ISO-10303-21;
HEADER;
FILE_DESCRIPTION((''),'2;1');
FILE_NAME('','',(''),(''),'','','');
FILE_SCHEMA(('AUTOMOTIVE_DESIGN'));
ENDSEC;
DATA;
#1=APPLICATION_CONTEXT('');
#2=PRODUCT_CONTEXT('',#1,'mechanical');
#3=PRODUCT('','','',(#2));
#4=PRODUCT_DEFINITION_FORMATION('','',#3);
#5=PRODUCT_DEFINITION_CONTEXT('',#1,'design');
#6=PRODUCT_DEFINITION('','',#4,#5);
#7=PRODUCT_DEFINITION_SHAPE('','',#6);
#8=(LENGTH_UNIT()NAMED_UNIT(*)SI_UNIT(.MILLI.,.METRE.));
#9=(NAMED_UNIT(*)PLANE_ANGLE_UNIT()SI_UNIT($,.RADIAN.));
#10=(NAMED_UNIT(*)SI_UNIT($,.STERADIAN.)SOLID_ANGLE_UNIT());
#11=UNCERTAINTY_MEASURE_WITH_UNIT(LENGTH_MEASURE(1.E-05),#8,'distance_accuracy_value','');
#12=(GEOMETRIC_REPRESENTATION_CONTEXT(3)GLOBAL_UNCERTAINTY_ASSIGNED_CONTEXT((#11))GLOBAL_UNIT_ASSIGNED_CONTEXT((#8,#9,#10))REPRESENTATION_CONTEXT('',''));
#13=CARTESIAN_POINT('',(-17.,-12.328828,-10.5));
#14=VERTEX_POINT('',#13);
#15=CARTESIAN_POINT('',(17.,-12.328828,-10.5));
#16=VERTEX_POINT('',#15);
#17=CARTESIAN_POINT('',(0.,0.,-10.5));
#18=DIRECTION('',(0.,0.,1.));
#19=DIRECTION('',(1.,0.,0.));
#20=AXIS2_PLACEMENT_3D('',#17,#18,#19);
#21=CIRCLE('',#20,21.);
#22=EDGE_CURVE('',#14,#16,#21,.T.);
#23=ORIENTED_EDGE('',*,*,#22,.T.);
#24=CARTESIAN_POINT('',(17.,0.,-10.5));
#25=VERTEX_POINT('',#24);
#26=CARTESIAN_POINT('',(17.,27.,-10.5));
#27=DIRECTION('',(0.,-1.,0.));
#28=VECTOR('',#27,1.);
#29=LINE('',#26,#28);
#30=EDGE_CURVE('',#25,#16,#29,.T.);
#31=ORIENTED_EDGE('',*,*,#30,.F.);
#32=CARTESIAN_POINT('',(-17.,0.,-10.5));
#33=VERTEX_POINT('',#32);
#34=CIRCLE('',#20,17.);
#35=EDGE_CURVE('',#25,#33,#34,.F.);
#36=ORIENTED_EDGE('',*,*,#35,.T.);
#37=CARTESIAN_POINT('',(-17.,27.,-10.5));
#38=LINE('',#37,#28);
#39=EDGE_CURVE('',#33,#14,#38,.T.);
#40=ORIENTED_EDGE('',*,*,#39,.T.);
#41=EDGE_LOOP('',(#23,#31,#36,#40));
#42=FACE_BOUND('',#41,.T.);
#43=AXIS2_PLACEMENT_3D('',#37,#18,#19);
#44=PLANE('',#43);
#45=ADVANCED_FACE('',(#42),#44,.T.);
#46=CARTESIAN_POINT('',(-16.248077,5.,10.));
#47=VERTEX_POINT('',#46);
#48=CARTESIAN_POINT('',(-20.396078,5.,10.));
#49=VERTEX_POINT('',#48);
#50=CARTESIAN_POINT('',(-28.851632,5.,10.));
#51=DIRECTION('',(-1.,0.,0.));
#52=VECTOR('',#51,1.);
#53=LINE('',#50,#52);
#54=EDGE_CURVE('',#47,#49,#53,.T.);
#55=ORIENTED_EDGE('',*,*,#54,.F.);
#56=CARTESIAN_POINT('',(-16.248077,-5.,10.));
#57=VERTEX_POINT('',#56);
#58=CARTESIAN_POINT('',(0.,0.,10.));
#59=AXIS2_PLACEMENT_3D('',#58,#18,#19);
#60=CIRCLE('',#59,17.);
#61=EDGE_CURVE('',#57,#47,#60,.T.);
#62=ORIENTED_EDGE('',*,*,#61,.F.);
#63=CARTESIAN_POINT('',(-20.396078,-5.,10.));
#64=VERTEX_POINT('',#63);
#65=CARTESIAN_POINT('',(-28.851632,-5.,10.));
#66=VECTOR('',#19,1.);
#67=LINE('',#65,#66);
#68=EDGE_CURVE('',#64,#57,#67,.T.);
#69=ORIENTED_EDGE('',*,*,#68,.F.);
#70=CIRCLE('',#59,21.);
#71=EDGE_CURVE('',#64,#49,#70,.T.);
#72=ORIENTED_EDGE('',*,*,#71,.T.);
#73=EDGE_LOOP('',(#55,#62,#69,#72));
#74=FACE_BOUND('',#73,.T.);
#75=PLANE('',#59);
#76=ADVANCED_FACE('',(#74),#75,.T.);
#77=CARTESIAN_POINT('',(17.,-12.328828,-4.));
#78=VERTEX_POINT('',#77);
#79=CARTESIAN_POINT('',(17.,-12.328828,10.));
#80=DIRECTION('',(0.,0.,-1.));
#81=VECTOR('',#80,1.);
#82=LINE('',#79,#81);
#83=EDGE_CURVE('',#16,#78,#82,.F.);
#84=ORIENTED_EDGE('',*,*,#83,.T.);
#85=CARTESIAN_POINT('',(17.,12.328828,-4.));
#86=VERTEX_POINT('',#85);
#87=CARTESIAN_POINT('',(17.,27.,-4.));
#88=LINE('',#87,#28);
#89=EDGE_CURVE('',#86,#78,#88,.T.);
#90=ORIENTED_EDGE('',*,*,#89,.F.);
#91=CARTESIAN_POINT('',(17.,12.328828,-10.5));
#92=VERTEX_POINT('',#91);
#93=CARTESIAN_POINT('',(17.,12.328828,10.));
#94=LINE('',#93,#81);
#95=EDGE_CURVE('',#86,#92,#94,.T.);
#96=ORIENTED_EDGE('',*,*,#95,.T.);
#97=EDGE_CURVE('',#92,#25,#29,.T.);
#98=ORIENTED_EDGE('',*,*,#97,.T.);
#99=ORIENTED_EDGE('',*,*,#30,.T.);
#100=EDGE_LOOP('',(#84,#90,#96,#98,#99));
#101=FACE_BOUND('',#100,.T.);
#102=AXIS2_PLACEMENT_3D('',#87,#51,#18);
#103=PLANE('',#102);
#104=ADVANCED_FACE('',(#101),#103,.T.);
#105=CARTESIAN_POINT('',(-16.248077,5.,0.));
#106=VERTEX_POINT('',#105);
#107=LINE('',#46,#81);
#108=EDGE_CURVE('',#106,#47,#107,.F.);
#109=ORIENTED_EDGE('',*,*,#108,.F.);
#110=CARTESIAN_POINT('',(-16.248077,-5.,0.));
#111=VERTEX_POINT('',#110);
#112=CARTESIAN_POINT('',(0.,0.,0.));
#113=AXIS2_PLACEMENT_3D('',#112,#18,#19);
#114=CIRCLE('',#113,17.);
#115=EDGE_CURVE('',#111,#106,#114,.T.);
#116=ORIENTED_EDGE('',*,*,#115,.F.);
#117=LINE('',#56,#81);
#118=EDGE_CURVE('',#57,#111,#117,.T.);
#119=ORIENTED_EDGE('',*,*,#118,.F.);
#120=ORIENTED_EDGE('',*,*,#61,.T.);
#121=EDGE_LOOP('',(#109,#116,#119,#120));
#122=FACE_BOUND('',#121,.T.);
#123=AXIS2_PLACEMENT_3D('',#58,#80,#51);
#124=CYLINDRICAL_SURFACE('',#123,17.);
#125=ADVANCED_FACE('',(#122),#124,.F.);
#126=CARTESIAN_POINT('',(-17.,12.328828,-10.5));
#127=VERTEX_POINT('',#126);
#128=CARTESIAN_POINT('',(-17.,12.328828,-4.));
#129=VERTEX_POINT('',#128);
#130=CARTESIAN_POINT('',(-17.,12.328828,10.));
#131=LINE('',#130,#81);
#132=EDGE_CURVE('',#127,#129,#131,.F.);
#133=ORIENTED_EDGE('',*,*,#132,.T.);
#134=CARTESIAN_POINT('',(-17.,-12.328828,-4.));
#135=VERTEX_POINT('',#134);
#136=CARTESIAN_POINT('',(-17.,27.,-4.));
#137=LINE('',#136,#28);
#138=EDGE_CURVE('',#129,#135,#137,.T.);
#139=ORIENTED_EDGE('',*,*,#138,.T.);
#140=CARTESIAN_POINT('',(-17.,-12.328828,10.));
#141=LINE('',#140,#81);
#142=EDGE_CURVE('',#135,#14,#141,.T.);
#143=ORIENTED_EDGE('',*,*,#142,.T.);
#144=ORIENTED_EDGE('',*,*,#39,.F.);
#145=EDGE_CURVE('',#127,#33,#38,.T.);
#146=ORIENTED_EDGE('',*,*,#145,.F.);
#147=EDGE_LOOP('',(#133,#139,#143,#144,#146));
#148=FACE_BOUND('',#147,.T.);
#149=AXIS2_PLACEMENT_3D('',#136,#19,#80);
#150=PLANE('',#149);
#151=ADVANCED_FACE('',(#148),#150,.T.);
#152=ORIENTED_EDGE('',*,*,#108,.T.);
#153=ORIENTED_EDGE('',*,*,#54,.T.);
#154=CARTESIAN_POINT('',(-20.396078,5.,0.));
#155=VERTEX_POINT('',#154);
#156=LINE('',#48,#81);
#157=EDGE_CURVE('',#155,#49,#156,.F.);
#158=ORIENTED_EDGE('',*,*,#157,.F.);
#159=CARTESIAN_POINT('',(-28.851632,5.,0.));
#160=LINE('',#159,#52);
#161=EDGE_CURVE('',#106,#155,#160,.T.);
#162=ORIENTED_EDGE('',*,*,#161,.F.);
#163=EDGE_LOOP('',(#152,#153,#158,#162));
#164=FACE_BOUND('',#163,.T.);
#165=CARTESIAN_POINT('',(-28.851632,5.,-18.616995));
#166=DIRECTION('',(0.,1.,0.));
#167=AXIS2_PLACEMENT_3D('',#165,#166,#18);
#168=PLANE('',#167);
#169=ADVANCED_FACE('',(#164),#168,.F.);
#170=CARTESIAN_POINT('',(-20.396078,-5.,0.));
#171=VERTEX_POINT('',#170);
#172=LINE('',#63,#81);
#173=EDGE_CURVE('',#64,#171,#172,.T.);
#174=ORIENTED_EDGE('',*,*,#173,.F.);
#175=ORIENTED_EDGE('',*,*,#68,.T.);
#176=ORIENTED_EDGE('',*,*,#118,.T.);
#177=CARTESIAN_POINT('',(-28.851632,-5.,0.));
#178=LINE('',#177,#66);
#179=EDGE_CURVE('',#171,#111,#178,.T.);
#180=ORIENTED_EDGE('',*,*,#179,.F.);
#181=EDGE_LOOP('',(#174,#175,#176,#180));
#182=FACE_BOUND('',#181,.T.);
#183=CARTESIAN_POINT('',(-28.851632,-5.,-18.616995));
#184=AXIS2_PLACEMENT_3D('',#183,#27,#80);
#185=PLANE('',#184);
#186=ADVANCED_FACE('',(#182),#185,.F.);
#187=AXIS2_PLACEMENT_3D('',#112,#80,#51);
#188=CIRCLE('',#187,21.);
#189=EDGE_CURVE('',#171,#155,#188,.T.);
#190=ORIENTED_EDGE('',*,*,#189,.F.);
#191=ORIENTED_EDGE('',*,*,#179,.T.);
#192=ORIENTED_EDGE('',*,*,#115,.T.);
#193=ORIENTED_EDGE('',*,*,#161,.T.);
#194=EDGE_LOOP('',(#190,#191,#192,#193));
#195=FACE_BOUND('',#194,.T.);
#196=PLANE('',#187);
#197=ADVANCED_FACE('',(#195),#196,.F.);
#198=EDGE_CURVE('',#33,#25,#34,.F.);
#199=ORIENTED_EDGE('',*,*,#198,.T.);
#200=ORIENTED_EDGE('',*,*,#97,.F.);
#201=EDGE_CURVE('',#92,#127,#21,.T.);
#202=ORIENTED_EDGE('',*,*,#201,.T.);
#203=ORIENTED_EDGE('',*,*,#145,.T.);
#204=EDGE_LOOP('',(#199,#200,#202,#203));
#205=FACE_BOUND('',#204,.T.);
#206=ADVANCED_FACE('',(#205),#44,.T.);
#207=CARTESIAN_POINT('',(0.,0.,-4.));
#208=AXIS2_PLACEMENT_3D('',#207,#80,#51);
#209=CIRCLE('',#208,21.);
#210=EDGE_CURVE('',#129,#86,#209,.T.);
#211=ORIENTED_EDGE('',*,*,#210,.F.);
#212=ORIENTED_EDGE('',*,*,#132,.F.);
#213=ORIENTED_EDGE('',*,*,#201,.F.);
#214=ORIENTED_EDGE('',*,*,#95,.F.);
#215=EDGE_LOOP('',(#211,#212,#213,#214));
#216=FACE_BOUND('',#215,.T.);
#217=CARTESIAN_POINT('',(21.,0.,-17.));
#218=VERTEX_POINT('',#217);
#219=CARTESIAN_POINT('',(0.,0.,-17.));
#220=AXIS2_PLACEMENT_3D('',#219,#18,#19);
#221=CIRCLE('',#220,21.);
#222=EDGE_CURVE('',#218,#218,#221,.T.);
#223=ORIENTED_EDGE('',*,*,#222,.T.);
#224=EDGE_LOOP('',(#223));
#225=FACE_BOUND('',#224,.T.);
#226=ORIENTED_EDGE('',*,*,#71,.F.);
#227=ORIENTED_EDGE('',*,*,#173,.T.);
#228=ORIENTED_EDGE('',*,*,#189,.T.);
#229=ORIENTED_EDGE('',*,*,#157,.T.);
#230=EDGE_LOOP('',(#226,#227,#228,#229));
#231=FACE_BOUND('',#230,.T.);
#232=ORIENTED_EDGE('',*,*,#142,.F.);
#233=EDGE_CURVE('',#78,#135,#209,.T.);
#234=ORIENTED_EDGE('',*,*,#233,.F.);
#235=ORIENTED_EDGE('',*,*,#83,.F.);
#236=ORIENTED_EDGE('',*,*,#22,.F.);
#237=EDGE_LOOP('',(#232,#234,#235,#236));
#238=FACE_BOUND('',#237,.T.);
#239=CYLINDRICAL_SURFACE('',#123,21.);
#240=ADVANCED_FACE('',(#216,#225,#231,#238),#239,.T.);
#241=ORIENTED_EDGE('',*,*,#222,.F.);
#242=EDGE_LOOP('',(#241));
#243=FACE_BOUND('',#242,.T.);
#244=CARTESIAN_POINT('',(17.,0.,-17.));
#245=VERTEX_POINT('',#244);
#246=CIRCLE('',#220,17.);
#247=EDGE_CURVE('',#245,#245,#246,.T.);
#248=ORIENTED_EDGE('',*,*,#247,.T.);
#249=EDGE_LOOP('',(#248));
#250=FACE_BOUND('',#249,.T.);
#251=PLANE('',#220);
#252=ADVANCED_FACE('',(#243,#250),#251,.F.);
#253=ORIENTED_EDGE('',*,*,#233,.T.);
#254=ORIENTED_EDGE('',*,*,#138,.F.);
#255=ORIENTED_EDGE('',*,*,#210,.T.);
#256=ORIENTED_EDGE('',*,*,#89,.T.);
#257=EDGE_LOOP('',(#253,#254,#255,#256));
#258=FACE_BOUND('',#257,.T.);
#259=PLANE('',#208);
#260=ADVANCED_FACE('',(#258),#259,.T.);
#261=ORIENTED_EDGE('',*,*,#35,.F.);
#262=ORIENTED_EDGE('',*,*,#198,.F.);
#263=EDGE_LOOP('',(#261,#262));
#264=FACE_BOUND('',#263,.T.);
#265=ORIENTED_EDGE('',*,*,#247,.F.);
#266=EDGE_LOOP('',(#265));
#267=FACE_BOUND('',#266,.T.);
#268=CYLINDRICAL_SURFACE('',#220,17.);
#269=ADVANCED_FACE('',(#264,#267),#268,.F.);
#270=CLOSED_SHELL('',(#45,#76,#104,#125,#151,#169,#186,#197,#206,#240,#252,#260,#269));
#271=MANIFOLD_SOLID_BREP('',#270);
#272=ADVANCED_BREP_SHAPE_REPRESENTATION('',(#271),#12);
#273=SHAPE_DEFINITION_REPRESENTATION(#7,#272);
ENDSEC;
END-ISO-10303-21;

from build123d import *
from build123d.topology import SkipClean

# Parameters (mm, degrees)
ESBO_O1_R                  = 21
ESBO_O1_R_2                = 17
RESSALTO_EXTRUS_O1_DEPTH   = 10
RESSALTO_EXTRUS_O2_START   = 4
ESBO_O2_R                  = 21
RESSALTO_EXTRUS_O2_DEPTH   = 4
ESBO_O3_W                  = 15.703263836
ESBO_O3_H                  = 10
CORTE_EXTRUS_O1_DEPTH      = 10
RESSALTO_EXTRUS_O4_START   = -17
ESBO_O8_R                  = 21
ESBO_O8_R_2                = 17
RESSALTO_EXTRUS_O4_DEPTH   = 17
CORTE_EXTRUS_O3_DEPTH      = 27
CORTE_EXTRUS_O3_DEPTH_BACK = 27
ESBO_O12_W                 = 34
ESBO_O12_H                 = 6.5


with BuildPart() as part:
    # Esboço1 → Ressalto-extrusão1 (new body)
    with BuildSketch(Plane.XY):
        Circle(ESBO_O1_R)
        Circle(ESBO_O1_R_2, mode=Mode.SUBTRACT)
    extrude(amount=RESSALTO_EXTRUS_O1_DEPTH)

    # Esboço2 → Ressalto-extrusão2 (add)
    with BuildSketch(Plane(origin=(0, 0, 0), x_dir=(-1, 0, 0), z_dir=(0, 0, -1)).offset(RESSALTO_EXTRUS_O2_START)):
        Circle(ESBO_O2_R)
    extrude(amount=-RESSALTO_EXTRUS_O2_DEPTH)

    # Esboço3 → Corte-extrusão1 (cut)
    with SkipClean():  # the faces are left unmerged after this step: merging them gives an invalid solid
        with BuildSketch(Plane.XY.offset(10)):
            with Locations((-21, 0)):
                Rectangle(ESBO_O3_W, ESBO_O3_H)
        extrude(amount=-CORTE_EXTRUS_O1_DEPTH, mode=Mode.SUBTRACT)

    # Esboço8 → Ressalto-extrusão4 (add)
    with SkipClean():  # the faces are left unmerged after this step: merging them gives an invalid solid
        with BuildSketch(Plane.XY.offset(RESSALTO_EXTRUS_O4_START)):
            with Locations(Location((0, 0, 0), (0, 0, 193.774146998))):
                Circle(ESBO_O8_R)
            Circle(ESBO_O8_R_2, mode=Mode.SUBTRACT)
        extrude(amount=RESSALTO_EXTRUS_O4_DEPTH)
    add(part.part.scale(1), mode=Mode.REPLACE)  # the faces are merged on a copy

    # Esboço12 → Corte-extrusão3 (cut, two sides: drawn at the far end of the back side and taken through both)
    with BuildSketch(Plane(origin=(0, 0, 0), x_dir=(1, 0, 0), z_dir=(0, 1, 0)).offset(-CORTE_EXTRUS_O3_DEPTH_BACK)):
        with Locations((0, 7.25)):
            Rectangle(ESBO_O12_W, ESBO_O12_H)
    extrude(amount=CORTE_EXTRUS_O3_DEPTH + CORTE_EXTRUS_O3_DEPTH_BACK, mode=Mode.SUBTRACT)


solid = part.part
